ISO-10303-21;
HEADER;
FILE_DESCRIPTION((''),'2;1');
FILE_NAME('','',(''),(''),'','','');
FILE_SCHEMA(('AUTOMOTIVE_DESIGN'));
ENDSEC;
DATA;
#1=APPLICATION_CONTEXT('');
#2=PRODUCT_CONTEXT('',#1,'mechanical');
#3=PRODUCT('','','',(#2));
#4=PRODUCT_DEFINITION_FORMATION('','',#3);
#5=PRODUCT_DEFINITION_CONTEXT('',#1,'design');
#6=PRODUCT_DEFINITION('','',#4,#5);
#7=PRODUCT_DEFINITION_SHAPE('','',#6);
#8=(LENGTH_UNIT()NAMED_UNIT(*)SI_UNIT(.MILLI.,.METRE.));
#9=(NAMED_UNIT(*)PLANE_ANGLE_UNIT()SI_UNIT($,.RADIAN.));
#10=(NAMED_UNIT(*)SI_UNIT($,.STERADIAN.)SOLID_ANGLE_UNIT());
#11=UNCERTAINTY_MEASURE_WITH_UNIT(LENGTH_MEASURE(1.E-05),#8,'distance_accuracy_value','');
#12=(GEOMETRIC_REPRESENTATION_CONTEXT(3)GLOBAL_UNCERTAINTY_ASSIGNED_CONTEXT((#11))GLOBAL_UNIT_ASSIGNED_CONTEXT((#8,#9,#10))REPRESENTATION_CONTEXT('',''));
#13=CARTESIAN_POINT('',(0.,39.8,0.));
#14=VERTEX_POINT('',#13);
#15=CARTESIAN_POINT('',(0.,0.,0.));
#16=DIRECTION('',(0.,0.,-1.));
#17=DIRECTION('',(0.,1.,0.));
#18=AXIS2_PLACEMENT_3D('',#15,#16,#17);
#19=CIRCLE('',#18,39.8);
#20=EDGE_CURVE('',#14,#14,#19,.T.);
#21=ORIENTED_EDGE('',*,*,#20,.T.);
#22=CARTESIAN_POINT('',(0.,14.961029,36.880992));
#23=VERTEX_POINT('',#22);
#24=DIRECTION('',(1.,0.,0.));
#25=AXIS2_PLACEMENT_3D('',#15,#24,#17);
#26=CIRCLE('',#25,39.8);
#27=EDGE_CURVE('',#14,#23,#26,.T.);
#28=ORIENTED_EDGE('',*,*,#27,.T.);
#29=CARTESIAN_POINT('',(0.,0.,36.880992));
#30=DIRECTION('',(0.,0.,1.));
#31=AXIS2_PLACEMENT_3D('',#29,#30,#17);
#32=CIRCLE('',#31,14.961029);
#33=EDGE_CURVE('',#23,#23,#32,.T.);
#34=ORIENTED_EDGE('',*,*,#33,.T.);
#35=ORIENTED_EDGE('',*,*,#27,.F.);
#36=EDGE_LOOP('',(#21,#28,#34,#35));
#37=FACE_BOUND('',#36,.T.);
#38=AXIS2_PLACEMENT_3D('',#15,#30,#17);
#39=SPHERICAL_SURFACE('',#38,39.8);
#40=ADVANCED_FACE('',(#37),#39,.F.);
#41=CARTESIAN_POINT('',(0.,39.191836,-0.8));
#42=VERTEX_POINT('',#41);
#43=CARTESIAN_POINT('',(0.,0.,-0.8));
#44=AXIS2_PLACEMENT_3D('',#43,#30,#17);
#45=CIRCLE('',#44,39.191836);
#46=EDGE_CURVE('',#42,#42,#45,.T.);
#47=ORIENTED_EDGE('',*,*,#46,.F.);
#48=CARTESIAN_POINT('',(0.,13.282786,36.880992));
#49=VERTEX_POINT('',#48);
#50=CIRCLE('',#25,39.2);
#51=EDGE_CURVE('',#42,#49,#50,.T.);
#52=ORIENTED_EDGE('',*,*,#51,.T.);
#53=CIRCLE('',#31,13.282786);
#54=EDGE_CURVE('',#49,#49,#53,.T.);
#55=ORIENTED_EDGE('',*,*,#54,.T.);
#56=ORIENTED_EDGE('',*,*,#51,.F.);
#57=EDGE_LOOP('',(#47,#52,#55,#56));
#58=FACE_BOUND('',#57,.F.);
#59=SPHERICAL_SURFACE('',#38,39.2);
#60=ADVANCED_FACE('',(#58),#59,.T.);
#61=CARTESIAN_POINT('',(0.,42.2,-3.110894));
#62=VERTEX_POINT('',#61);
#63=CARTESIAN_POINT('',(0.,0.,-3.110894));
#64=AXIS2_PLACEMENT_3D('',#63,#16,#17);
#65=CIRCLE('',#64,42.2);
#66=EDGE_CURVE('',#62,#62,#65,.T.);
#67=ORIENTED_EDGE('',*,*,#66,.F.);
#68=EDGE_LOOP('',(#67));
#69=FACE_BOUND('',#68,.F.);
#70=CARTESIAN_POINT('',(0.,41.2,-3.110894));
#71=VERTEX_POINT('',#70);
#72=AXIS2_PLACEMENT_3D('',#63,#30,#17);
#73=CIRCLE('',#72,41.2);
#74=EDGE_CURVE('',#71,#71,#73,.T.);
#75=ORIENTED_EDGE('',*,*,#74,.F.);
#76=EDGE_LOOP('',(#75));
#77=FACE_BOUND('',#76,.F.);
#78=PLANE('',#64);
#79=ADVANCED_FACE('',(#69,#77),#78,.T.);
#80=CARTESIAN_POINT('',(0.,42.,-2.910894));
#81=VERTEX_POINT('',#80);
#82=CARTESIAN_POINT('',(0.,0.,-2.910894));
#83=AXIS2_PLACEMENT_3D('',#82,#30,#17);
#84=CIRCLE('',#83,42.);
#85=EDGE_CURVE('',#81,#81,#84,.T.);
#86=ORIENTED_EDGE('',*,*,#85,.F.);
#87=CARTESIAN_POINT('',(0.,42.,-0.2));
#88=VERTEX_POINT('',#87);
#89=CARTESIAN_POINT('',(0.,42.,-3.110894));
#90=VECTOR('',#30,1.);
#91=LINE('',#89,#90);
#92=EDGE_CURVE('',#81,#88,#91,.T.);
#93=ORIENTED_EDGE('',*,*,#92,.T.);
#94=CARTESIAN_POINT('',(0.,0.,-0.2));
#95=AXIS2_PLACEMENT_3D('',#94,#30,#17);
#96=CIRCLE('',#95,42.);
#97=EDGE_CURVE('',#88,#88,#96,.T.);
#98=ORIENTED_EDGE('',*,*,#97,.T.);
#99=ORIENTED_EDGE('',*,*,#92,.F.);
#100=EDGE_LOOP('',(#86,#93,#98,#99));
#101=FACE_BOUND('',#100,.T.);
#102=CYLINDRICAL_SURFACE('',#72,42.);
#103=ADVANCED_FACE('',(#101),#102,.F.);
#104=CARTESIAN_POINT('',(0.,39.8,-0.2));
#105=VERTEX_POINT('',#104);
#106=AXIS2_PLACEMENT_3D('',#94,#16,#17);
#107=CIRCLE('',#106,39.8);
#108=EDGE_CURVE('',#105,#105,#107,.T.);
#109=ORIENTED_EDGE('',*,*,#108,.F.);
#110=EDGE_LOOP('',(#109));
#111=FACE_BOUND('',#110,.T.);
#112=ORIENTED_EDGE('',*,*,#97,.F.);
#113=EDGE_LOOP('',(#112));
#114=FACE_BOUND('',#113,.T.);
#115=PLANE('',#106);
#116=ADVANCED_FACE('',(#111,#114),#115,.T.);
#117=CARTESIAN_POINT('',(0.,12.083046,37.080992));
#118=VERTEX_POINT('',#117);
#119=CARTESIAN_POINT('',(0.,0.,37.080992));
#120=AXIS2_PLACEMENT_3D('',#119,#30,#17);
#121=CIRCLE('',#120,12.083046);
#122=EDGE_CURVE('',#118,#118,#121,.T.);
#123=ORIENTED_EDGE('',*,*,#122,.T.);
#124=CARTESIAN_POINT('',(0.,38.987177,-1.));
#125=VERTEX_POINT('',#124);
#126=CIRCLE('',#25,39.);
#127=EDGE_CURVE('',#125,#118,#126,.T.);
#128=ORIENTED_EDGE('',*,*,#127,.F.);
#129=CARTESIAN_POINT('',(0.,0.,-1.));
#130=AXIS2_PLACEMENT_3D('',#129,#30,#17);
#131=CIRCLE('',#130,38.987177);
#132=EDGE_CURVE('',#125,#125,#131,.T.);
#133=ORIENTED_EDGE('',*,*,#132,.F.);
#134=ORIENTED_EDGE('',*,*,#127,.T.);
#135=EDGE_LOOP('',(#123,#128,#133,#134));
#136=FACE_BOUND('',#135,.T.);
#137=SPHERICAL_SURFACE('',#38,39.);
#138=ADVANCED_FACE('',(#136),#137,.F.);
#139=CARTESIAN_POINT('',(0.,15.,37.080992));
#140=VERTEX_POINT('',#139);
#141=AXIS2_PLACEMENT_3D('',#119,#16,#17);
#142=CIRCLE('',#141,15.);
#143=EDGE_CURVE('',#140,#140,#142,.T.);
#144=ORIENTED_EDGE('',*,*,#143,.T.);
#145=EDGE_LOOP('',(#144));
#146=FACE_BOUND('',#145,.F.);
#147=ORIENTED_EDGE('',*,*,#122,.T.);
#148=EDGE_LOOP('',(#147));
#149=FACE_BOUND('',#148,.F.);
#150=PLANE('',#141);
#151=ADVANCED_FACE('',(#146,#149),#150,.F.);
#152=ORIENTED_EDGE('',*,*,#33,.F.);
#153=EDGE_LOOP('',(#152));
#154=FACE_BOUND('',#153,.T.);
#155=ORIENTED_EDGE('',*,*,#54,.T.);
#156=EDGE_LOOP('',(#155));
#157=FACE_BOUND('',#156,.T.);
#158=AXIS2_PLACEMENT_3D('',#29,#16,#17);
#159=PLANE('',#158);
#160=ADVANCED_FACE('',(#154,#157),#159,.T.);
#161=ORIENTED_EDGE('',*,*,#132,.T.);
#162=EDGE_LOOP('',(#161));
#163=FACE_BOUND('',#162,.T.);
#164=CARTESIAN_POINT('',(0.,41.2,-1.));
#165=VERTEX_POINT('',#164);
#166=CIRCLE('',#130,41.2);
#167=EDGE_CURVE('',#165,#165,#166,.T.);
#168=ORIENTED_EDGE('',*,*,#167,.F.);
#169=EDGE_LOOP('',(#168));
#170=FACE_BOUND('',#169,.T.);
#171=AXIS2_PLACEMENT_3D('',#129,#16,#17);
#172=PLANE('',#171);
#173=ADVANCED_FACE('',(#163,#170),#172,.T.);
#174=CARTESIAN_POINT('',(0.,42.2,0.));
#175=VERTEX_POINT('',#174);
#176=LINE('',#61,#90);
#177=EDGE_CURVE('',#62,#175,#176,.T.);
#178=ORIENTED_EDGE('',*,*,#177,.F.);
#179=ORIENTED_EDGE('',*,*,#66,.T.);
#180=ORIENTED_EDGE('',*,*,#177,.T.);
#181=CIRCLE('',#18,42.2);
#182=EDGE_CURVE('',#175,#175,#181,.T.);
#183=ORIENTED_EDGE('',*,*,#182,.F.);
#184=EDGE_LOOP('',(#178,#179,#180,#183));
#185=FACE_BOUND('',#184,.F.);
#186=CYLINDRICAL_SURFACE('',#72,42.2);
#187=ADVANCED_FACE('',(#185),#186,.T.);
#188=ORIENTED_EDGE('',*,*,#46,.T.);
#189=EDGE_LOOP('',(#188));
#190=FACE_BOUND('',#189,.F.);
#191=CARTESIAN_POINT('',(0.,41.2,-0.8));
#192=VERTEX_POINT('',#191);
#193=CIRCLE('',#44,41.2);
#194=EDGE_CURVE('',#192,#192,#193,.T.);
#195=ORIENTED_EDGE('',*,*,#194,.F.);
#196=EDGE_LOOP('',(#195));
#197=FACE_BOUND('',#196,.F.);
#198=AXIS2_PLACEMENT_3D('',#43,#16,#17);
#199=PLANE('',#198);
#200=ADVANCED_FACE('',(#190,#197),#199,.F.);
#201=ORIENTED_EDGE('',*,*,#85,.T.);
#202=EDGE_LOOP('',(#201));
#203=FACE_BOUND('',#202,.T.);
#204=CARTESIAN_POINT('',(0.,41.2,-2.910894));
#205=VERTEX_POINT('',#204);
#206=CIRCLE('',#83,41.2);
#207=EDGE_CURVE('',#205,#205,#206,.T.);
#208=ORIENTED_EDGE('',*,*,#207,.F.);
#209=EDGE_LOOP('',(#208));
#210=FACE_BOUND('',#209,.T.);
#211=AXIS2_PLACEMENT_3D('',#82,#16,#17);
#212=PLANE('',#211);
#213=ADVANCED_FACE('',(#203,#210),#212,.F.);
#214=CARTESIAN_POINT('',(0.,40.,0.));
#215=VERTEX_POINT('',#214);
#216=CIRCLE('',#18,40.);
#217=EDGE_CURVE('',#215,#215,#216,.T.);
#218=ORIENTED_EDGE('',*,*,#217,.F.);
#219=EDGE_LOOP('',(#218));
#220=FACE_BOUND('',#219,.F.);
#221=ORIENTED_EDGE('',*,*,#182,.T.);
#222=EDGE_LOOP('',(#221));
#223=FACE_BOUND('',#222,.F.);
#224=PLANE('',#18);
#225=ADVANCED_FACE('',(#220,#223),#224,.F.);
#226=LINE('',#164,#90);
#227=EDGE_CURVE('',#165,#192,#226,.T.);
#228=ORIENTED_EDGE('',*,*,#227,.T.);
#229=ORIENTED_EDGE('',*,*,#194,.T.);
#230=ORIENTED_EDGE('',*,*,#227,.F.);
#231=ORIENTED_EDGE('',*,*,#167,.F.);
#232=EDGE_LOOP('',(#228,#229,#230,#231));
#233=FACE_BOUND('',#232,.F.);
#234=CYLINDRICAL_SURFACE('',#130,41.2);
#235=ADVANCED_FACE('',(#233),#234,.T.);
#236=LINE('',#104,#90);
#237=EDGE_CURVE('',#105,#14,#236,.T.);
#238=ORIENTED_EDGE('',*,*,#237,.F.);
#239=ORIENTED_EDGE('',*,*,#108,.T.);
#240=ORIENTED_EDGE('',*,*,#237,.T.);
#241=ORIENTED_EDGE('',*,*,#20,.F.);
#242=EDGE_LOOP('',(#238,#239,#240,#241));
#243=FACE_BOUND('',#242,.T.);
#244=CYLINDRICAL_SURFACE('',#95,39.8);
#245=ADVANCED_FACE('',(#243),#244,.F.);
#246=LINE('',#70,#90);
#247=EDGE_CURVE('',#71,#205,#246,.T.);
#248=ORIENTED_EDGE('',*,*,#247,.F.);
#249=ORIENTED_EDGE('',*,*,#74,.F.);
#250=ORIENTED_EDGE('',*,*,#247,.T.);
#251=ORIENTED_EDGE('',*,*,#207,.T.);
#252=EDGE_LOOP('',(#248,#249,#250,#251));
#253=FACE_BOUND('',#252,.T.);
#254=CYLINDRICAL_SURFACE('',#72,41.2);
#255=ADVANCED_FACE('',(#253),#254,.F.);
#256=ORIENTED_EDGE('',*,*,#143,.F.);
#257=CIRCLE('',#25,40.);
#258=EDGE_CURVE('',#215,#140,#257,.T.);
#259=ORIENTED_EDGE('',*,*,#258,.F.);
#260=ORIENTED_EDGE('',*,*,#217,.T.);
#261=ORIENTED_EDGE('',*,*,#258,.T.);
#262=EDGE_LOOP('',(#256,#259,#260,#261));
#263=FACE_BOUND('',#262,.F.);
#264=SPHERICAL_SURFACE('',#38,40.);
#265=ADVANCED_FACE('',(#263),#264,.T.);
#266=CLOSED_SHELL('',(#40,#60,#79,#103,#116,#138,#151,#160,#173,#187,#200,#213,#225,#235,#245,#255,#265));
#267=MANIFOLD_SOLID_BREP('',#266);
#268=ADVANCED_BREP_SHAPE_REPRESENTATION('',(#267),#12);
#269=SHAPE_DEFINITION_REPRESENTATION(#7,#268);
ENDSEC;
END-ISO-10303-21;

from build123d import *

# Parameters (mm, degrees)
F3_T = -1
F4_T = 0.2


# Not quite as in the source:
# - a shell that OpenCascade refuses in one call is made with other operations: the cavity is built on its own and cut out


with BuildPart() as f2:
    # F0 (on Right) → F2 (revolve)
    with BuildSketch(Plane.YZ):
        with BuildLine():
            Line((15, 37.0809924355), (0, 37.0809924355))
            Line((0, 37.0809924355), (0, 0))
            Line((0, 0), (0, -3.1108935364))
            Line((0, -3.1108935364), (42.2, -3.1108935364))
            Line((42.2, -3.1108935364), (42.2, 0))
            Line((42.2, 0), (40, 0))
            ThreePointArc((40, 0), (33.1662479036, 22.360679775), (15, 37.0809924355))
        make_face()
    revolve(axis=Axis((0, 0, 9.5782782882), (0, 0, -1)))

    # F3
    f3_openings = [f2.faces().sort_by_distance(p)[0] for p in [
        (0, 0, 37.080992),
        (0, 0, -3.110894),
    ]]
    offset(amount=F3_T, openings=f3_openings, kind=Kind.INTERSECTION)

    # F4: shell of thickness 0.2, made by hand


with BuildPart() as f4_core1:
    # F4_t2: copy of F2
    add(f2.part)

    # the walls: a layer under each face that stays
    f4_faces = [f4_core1.faces().sort_by_distance(p)[0] for p in [
        (0, -42.2, -1.5554467682),
        (-11.2533333333, -39.3866666667, 0),
        (0, -33.1662479036, 22.360679775),
        (-10, -10, 37.0809924355),
        (0, -31.8525104905, 22.5037235909),
        (-20.3185185185, -36.925, -3.1108935364),
        (-10.9866666667, -38.4533333333, -1),
    ]]
    thicken(f4_faces, amount=-F4_T, mode=Mode.SUBTRACT)

    # F4_s3 → F4_t4 (revolve, cut)
    with BuildSketch(Plane.YZ):
        Polygon((40.002, 0.002), (40, -0.2), (39.8, -0.2), (39.8, 0), align=None)
    revolve(axis=Axis((0, 0, 0), (0, 0, -1)), mode=Mode.SUBTRACT)


with BuildPart() as f2_1:
    add(f2.part)

    # what is left inside the walls is the cavity
    f4_cavity = [f4_core1.part.solids().sort_by_distance(p)[0] for p in [
        (0, -36.186898, 15.076644),
    ]]
    add(f4_cavity, mode=Mode.SUBTRACT)


solid = f2_1.part
